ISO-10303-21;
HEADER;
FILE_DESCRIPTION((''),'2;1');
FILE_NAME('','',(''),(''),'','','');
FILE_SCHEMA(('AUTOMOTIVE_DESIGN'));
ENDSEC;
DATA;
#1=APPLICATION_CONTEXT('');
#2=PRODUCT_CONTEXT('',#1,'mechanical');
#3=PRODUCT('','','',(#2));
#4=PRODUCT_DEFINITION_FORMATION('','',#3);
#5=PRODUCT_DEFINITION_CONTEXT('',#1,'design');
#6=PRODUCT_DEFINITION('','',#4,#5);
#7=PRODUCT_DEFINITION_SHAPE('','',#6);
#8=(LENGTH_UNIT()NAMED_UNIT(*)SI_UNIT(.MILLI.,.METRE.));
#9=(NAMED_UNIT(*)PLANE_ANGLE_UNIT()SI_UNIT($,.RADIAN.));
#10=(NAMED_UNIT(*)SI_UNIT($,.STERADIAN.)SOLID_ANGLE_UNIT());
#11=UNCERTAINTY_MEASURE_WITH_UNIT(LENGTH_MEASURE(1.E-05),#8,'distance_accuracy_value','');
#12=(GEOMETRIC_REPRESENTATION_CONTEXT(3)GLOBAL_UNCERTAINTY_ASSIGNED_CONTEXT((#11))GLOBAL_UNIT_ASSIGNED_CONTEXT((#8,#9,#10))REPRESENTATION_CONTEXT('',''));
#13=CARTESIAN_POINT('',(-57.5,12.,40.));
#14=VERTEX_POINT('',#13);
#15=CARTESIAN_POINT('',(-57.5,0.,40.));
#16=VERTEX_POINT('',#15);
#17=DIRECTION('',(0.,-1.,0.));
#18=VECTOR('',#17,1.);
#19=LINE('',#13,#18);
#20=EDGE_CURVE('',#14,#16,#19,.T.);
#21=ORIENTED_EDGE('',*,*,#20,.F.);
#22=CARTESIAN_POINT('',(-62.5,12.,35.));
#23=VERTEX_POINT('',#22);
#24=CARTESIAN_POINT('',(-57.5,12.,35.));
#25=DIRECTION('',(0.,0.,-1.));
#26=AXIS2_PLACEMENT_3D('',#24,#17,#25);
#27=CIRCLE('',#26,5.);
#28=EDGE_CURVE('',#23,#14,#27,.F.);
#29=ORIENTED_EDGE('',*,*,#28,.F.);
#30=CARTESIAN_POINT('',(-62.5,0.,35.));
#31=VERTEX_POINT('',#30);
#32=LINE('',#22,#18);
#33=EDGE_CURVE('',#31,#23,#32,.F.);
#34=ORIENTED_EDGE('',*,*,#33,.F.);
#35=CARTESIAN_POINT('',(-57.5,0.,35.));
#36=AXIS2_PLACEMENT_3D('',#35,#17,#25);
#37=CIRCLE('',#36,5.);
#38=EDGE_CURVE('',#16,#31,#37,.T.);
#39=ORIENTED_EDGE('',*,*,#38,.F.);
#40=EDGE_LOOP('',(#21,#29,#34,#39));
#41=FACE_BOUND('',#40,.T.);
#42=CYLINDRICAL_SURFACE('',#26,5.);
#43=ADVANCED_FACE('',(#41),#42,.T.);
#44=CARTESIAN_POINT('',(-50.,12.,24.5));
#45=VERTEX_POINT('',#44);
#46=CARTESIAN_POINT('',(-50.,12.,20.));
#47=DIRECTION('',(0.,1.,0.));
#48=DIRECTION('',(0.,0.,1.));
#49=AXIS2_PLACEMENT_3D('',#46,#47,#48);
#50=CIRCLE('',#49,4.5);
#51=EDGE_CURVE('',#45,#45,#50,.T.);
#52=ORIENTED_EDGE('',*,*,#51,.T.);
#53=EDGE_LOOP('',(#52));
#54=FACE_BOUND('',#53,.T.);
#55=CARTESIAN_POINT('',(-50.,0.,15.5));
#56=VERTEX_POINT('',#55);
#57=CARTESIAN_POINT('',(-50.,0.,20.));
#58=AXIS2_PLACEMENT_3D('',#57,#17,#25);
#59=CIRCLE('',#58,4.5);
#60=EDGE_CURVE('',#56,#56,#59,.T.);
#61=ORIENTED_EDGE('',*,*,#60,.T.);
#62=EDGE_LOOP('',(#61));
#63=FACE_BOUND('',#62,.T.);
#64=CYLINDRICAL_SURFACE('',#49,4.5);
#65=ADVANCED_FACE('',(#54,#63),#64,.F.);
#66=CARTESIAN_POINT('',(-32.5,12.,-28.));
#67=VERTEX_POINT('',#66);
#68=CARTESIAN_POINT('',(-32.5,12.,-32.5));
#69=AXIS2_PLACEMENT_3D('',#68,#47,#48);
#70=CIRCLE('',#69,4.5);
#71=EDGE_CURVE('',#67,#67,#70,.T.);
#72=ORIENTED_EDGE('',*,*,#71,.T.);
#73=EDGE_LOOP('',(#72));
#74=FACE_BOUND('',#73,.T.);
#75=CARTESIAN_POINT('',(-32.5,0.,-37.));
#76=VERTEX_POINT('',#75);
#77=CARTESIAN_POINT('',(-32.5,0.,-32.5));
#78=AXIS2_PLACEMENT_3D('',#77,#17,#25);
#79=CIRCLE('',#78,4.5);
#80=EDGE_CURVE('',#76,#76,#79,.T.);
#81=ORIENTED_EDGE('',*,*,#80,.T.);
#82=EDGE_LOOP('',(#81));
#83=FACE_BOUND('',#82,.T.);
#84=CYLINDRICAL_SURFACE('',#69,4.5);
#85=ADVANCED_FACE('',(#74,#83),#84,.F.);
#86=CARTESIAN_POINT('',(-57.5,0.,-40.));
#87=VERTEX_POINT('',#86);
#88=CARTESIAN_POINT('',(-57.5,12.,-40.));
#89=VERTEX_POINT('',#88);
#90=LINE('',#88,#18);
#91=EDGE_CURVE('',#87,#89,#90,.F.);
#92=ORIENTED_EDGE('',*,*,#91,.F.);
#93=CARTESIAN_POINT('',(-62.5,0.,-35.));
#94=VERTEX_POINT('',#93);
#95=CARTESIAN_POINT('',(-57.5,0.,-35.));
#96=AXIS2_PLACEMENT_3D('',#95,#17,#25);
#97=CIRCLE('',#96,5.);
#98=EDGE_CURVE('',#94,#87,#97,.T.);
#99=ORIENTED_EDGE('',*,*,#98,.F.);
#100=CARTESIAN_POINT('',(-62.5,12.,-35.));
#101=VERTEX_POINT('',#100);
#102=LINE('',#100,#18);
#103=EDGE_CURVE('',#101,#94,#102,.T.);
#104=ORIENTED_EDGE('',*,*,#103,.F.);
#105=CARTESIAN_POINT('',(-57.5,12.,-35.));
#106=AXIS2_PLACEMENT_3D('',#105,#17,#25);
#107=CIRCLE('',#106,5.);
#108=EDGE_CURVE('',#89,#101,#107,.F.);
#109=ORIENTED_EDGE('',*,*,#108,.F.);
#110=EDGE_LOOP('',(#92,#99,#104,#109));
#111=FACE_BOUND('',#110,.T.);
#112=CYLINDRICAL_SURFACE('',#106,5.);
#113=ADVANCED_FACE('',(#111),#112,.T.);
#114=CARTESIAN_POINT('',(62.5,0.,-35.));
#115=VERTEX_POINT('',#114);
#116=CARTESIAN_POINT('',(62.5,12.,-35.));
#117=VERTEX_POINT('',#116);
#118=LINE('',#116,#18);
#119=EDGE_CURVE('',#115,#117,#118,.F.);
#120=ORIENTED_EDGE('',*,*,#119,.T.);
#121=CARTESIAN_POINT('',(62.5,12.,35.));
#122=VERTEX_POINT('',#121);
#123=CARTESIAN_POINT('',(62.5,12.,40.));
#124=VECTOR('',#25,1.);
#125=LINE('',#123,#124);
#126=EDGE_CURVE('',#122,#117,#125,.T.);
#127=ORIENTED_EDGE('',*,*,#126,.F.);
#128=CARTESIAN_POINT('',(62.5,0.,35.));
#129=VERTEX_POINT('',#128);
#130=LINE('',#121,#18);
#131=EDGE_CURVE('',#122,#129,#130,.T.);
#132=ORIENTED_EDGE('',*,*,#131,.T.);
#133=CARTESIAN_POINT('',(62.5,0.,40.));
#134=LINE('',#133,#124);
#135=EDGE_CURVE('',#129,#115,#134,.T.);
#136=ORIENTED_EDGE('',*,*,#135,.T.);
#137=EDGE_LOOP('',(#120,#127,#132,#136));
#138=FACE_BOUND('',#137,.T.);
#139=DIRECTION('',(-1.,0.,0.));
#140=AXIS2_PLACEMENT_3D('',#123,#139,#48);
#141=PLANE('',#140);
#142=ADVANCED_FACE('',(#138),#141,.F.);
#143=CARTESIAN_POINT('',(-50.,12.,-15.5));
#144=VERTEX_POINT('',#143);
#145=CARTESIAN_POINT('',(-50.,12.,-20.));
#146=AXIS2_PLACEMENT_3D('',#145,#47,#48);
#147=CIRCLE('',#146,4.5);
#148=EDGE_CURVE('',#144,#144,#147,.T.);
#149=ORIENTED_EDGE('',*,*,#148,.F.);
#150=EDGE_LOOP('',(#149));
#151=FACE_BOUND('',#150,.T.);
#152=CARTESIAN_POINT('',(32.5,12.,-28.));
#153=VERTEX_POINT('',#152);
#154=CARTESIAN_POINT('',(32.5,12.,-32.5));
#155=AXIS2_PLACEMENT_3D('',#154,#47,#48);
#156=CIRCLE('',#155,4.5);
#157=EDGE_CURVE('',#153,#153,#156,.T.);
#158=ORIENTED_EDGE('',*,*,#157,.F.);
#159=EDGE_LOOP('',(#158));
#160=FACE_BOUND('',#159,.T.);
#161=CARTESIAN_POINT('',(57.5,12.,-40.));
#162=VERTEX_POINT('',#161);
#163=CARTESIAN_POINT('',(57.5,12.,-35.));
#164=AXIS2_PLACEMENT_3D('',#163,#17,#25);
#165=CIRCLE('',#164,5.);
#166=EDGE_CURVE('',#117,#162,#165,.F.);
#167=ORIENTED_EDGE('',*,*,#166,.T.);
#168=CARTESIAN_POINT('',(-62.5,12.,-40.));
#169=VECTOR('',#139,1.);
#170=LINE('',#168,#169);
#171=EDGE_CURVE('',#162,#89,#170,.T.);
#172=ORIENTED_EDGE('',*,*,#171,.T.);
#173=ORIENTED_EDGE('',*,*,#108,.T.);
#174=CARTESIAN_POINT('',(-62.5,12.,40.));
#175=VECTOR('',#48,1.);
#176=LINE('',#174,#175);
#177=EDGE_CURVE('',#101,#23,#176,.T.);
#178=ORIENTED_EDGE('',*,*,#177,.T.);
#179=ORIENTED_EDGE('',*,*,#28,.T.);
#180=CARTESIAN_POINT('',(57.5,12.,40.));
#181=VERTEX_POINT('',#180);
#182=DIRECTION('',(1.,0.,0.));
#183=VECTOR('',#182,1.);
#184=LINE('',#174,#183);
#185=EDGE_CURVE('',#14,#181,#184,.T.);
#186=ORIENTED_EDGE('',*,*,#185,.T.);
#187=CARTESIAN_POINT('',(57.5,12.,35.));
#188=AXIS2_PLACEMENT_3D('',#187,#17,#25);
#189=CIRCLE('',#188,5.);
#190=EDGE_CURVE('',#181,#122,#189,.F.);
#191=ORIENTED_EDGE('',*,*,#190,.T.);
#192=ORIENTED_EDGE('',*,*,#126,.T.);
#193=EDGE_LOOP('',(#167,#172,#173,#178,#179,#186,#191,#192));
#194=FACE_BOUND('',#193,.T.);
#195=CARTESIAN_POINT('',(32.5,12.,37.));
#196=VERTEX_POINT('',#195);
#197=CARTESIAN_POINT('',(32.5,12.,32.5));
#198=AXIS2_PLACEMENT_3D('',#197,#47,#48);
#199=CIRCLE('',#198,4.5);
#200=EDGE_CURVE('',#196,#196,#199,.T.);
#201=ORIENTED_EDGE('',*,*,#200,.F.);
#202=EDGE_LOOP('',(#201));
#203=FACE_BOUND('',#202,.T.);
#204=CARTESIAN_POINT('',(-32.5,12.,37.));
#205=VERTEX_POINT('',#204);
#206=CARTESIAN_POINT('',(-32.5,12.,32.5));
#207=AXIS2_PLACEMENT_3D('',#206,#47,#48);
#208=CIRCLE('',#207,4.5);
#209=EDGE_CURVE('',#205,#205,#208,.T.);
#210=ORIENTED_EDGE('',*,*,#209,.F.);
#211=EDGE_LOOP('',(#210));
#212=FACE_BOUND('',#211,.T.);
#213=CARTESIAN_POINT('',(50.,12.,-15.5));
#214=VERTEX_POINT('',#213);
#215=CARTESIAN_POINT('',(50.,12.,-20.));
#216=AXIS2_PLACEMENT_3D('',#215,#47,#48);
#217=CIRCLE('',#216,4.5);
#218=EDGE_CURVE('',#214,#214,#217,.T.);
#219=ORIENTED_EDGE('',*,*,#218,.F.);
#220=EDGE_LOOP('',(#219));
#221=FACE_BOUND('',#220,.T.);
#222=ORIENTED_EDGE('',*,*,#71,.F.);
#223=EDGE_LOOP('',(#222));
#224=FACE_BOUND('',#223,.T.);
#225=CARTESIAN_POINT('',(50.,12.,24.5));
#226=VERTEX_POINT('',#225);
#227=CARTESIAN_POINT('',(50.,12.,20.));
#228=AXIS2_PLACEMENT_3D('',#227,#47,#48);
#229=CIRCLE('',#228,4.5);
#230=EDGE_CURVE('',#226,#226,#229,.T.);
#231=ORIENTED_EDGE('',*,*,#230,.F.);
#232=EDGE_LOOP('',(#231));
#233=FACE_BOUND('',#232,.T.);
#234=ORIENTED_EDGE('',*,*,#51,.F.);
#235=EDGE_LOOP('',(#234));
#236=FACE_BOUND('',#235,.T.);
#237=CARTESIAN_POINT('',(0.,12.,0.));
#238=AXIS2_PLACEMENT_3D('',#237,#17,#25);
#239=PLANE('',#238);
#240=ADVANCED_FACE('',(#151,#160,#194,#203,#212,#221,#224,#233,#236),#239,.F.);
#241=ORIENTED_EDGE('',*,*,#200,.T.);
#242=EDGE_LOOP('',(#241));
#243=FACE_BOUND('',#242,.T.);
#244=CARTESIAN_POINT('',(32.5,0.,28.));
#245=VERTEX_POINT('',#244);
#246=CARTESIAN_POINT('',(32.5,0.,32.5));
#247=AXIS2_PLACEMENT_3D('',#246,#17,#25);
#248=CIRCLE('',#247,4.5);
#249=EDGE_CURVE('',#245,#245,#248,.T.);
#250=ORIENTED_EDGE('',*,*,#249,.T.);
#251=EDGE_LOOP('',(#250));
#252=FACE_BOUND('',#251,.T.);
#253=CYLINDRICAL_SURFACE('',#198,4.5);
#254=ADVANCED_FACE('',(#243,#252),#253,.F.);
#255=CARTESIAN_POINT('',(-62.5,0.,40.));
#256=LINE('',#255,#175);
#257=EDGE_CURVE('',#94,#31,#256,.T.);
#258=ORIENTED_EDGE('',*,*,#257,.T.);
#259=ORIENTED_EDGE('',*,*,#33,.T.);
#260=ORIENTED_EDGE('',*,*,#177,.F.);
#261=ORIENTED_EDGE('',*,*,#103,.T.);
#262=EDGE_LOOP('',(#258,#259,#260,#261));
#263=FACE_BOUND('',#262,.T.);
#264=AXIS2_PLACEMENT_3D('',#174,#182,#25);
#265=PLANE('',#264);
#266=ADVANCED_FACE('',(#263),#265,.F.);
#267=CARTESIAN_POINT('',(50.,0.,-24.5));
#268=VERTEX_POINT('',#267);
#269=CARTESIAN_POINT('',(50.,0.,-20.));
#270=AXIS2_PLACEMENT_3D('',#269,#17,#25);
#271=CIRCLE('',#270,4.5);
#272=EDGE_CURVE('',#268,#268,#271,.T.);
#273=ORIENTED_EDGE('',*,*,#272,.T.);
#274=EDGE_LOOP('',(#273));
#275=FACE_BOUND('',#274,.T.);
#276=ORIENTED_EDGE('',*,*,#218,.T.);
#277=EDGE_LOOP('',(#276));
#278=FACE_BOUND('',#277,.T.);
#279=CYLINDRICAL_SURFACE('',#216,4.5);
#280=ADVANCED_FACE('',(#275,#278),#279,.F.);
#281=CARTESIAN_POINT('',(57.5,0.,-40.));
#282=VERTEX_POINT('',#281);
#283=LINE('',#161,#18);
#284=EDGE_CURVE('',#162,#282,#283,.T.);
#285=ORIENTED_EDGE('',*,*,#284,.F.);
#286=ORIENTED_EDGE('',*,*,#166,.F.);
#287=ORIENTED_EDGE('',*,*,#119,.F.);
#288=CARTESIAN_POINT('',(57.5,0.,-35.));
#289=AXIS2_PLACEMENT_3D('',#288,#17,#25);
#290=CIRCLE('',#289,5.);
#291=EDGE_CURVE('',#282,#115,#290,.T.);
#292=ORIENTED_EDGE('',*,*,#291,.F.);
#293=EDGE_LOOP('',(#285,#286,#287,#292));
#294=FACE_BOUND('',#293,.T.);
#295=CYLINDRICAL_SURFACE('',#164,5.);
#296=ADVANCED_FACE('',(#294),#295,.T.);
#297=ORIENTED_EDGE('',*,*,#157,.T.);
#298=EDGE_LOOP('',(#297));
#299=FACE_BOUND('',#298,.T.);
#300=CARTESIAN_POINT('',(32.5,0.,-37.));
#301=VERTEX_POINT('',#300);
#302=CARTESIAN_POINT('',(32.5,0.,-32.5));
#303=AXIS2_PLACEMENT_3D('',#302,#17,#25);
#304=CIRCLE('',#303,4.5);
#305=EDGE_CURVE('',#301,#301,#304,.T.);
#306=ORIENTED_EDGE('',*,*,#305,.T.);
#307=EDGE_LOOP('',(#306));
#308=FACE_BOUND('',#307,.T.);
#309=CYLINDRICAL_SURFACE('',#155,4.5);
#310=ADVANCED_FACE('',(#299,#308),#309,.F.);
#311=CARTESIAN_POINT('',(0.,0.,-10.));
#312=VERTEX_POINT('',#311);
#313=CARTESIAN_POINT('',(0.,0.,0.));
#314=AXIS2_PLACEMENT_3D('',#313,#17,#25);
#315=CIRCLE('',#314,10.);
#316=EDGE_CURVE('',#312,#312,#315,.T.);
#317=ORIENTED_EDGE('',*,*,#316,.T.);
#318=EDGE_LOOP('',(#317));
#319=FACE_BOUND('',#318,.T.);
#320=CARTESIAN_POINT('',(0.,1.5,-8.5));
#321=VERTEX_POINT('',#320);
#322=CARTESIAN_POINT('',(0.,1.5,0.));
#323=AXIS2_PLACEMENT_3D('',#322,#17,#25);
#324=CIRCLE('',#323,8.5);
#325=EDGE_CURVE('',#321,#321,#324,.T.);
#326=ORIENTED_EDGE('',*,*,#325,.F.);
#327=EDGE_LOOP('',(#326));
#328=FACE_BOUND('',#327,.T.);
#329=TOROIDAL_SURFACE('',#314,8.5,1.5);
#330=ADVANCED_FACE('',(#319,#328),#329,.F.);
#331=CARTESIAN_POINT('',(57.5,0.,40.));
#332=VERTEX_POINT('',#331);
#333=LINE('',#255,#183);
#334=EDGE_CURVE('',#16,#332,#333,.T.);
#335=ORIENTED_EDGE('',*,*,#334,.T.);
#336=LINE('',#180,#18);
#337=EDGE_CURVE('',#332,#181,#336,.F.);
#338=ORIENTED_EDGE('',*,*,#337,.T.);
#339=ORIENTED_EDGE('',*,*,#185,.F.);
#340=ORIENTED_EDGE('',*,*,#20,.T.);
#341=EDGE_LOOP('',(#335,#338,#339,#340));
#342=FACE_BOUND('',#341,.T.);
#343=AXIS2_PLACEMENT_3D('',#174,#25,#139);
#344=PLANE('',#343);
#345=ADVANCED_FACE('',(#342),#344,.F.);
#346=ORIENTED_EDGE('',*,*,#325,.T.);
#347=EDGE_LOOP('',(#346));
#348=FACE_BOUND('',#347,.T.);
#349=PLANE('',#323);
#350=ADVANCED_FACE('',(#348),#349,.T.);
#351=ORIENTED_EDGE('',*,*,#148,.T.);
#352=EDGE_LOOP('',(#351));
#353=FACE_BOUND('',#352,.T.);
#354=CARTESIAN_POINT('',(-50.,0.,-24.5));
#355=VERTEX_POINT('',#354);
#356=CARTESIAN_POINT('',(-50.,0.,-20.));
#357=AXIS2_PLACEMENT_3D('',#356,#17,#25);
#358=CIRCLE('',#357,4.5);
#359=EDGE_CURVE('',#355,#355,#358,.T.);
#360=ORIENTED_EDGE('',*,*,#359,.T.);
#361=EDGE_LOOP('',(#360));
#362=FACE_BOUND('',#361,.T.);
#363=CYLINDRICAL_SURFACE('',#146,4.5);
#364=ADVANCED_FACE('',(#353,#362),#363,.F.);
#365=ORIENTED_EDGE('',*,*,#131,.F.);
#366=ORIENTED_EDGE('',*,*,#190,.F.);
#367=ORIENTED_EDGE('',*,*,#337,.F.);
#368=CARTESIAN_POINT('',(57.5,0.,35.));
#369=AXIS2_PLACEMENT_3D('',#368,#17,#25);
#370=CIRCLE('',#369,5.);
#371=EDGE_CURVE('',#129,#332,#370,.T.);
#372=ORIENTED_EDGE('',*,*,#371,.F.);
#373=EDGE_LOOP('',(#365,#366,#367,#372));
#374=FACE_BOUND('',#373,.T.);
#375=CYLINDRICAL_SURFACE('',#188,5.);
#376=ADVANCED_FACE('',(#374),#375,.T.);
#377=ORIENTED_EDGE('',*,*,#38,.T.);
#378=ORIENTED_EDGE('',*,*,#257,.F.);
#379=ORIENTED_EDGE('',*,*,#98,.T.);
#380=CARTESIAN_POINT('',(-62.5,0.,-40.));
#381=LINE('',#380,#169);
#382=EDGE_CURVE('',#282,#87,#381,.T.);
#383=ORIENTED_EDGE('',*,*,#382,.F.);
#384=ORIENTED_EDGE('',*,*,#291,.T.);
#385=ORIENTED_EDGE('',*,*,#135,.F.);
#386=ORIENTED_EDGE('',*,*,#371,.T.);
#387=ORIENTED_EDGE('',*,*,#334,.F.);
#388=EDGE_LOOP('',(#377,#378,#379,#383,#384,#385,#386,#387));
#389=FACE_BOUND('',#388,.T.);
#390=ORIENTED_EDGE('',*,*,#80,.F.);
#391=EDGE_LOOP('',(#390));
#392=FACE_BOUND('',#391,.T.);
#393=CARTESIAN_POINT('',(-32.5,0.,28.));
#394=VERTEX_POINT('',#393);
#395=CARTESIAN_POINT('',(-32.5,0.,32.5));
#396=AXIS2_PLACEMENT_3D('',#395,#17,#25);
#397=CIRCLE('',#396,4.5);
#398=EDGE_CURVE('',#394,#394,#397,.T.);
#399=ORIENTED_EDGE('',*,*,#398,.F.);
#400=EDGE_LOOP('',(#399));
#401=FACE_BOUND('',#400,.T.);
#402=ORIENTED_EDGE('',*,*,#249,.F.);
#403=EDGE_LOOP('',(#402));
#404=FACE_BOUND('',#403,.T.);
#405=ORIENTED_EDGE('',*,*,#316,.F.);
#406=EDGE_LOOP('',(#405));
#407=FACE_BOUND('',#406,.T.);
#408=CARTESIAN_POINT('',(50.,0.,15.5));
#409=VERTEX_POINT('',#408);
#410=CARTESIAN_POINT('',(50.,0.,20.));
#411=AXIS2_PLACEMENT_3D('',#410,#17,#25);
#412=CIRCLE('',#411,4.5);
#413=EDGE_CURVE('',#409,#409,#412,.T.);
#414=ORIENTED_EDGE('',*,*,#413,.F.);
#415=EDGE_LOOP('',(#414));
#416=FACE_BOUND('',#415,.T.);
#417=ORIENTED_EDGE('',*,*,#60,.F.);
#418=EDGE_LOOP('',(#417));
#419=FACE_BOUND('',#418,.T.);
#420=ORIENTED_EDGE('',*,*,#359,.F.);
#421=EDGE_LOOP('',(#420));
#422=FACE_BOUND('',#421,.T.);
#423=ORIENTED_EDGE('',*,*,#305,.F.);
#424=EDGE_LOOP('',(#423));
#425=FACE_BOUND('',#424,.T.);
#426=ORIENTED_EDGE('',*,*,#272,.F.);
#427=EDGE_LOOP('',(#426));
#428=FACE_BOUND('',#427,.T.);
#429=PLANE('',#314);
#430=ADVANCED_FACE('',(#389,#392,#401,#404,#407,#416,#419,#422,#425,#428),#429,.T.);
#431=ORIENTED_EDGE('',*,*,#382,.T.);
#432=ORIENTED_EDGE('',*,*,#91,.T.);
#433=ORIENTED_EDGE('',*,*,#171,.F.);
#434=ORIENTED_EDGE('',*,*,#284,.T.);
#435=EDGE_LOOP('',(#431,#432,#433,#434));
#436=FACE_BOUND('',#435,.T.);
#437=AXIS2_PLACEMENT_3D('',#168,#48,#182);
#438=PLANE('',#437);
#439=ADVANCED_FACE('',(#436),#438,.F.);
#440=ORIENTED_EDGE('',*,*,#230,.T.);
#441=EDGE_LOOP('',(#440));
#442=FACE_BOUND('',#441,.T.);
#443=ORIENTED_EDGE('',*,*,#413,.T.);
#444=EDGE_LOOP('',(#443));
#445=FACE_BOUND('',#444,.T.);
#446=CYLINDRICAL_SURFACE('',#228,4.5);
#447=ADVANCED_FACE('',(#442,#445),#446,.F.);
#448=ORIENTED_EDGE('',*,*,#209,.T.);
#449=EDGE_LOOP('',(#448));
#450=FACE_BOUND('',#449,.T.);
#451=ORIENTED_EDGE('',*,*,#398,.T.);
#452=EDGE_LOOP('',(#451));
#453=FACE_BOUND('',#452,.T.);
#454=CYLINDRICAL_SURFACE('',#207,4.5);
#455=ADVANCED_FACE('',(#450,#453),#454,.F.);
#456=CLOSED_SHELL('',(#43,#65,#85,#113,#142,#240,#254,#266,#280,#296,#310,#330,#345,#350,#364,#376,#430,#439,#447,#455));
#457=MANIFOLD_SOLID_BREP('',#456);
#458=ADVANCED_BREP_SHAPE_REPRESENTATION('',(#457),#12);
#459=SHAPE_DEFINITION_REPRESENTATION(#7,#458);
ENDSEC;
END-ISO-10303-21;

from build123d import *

# Parameters (mm, degrees)
SZKIC1_W                    = 125
SZKIC1_H                    = 80
DODANIE_WYCI_GNI_CIE1_DEPTH = 12
ZAOKR_GLENIE1_R             = 5
OTW_R_POD_RUB_M81_D         = 9
OTW_R_POD_RUB_M81_DEPTH     = 16
OTW_R_POD_RUB_M81_TIP       = 2.703872786
OTW_R_POD_RUB_M82_D         = 9
OTW_R_POD_RUB_M82_DEPTH     = 16
OTW_R_POD_RUB_M82_TIP       = 2.703872786
SZKIC8_R                    = 10
WYTNIJ_WYCI_GNI_CIE1_DEPTH  = 1.5
ZAOKR_GLENIE2_R             = 1.5


with BuildPart() as part:
    # Szkic1 → Dodanie-wyciągnięcie1 (new body)
    with BuildSketch(Plane(origin=(0, 0, 0), x_dir=(1, 0, 0), z_dir=(0, 1, 0))):
        Rectangle(SZKIC1_W, SZKIC1_H)
    extrude(amount=DODANIE_WYCI_GNI_CIE1_DEPTH)

    # Zaokrąglenie1
    zaokr_glenie1_edges = [part.edges().sort_by_distance(p)[0] for p in [
        (62.5, 6, 40),
        (-62.5, 6, 40),
        (-62.5, 6, -40),
        (62.5, 6, -40),
    ]]
    fillet(zaokr_glenie1_edges, radius=ZAOKR_GLENIE1_R)

    # Otwór pod śrubę M81
    with Locations(Plane(origin=(0, 12, 0), x_dir=(1, 0, 0), z_dir=(0, 1, 0))):
        with Locations((-50, 20), (50, 20), (50, -20), (-50, -20)):
            Hole(OTW_R_POD_RUB_M81_D / 2, depth=OTW_R_POD_RUB_M81_DEPTH)
            with Locations((0, 0, -(OTW_R_POD_RUB_M81_DEPTH + OTW_R_POD_RUB_M81_TIP / 2))):  # 118° drill point
                Cone(0, OTW_R_POD_RUB_M81_D / 2, OTW_R_POD_RUB_M81_TIP, mode=Mode.SUBTRACT)

    # Otwór pod śrubę M82
    with Locations(Plane(origin=(0, 12, 0), x_dir=(1, 0, 0), z_dir=(0, 1, 0))):
        with Locations((-32.5, 32.5), (32.5, 32.5), (32.5, -32.5), (-32.5, -32.5)):
            Hole(OTW_R_POD_RUB_M82_D / 2, depth=OTW_R_POD_RUB_M82_DEPTH)
            with Locations((0, 0, -(OTW_R_POD_RUB_M82_DEPTH + OTW_R_POD_RUB_M82_TIP / 2))):  # 118° drill point
                Cone(0, OTW_R_POD_RUB_M82_D / 2, OTW_R_POD_RUB_M82_TIP, mode=Mode.SUBTRACT)

    # Szkic8 → Wytnij-wyciągnięcie1 (cut)
    with BuildSketch(Plane.XZ):
        with Locations(Location((0, 0, 0), (0, 0, 270))):
            Circle(SZKIC8_R)
    extrude(amount=-WYTNIJ_WYCI_GNI_CIE1_DEPTH, mode=Mode.SUBTRACT)

    # Zaokrąglenie2
    zaokr_glenie2_edges = [part.edges().sort_by_distance(p)[0] for p in [
        (0, 1.5, 10),
    ]]
    fillet(zaokr_glenie2_edges, radius=ZAOKR_GLENIE2_R - 0.0001)  # a hair under: the kernel refuses the full size


solid = part.part
